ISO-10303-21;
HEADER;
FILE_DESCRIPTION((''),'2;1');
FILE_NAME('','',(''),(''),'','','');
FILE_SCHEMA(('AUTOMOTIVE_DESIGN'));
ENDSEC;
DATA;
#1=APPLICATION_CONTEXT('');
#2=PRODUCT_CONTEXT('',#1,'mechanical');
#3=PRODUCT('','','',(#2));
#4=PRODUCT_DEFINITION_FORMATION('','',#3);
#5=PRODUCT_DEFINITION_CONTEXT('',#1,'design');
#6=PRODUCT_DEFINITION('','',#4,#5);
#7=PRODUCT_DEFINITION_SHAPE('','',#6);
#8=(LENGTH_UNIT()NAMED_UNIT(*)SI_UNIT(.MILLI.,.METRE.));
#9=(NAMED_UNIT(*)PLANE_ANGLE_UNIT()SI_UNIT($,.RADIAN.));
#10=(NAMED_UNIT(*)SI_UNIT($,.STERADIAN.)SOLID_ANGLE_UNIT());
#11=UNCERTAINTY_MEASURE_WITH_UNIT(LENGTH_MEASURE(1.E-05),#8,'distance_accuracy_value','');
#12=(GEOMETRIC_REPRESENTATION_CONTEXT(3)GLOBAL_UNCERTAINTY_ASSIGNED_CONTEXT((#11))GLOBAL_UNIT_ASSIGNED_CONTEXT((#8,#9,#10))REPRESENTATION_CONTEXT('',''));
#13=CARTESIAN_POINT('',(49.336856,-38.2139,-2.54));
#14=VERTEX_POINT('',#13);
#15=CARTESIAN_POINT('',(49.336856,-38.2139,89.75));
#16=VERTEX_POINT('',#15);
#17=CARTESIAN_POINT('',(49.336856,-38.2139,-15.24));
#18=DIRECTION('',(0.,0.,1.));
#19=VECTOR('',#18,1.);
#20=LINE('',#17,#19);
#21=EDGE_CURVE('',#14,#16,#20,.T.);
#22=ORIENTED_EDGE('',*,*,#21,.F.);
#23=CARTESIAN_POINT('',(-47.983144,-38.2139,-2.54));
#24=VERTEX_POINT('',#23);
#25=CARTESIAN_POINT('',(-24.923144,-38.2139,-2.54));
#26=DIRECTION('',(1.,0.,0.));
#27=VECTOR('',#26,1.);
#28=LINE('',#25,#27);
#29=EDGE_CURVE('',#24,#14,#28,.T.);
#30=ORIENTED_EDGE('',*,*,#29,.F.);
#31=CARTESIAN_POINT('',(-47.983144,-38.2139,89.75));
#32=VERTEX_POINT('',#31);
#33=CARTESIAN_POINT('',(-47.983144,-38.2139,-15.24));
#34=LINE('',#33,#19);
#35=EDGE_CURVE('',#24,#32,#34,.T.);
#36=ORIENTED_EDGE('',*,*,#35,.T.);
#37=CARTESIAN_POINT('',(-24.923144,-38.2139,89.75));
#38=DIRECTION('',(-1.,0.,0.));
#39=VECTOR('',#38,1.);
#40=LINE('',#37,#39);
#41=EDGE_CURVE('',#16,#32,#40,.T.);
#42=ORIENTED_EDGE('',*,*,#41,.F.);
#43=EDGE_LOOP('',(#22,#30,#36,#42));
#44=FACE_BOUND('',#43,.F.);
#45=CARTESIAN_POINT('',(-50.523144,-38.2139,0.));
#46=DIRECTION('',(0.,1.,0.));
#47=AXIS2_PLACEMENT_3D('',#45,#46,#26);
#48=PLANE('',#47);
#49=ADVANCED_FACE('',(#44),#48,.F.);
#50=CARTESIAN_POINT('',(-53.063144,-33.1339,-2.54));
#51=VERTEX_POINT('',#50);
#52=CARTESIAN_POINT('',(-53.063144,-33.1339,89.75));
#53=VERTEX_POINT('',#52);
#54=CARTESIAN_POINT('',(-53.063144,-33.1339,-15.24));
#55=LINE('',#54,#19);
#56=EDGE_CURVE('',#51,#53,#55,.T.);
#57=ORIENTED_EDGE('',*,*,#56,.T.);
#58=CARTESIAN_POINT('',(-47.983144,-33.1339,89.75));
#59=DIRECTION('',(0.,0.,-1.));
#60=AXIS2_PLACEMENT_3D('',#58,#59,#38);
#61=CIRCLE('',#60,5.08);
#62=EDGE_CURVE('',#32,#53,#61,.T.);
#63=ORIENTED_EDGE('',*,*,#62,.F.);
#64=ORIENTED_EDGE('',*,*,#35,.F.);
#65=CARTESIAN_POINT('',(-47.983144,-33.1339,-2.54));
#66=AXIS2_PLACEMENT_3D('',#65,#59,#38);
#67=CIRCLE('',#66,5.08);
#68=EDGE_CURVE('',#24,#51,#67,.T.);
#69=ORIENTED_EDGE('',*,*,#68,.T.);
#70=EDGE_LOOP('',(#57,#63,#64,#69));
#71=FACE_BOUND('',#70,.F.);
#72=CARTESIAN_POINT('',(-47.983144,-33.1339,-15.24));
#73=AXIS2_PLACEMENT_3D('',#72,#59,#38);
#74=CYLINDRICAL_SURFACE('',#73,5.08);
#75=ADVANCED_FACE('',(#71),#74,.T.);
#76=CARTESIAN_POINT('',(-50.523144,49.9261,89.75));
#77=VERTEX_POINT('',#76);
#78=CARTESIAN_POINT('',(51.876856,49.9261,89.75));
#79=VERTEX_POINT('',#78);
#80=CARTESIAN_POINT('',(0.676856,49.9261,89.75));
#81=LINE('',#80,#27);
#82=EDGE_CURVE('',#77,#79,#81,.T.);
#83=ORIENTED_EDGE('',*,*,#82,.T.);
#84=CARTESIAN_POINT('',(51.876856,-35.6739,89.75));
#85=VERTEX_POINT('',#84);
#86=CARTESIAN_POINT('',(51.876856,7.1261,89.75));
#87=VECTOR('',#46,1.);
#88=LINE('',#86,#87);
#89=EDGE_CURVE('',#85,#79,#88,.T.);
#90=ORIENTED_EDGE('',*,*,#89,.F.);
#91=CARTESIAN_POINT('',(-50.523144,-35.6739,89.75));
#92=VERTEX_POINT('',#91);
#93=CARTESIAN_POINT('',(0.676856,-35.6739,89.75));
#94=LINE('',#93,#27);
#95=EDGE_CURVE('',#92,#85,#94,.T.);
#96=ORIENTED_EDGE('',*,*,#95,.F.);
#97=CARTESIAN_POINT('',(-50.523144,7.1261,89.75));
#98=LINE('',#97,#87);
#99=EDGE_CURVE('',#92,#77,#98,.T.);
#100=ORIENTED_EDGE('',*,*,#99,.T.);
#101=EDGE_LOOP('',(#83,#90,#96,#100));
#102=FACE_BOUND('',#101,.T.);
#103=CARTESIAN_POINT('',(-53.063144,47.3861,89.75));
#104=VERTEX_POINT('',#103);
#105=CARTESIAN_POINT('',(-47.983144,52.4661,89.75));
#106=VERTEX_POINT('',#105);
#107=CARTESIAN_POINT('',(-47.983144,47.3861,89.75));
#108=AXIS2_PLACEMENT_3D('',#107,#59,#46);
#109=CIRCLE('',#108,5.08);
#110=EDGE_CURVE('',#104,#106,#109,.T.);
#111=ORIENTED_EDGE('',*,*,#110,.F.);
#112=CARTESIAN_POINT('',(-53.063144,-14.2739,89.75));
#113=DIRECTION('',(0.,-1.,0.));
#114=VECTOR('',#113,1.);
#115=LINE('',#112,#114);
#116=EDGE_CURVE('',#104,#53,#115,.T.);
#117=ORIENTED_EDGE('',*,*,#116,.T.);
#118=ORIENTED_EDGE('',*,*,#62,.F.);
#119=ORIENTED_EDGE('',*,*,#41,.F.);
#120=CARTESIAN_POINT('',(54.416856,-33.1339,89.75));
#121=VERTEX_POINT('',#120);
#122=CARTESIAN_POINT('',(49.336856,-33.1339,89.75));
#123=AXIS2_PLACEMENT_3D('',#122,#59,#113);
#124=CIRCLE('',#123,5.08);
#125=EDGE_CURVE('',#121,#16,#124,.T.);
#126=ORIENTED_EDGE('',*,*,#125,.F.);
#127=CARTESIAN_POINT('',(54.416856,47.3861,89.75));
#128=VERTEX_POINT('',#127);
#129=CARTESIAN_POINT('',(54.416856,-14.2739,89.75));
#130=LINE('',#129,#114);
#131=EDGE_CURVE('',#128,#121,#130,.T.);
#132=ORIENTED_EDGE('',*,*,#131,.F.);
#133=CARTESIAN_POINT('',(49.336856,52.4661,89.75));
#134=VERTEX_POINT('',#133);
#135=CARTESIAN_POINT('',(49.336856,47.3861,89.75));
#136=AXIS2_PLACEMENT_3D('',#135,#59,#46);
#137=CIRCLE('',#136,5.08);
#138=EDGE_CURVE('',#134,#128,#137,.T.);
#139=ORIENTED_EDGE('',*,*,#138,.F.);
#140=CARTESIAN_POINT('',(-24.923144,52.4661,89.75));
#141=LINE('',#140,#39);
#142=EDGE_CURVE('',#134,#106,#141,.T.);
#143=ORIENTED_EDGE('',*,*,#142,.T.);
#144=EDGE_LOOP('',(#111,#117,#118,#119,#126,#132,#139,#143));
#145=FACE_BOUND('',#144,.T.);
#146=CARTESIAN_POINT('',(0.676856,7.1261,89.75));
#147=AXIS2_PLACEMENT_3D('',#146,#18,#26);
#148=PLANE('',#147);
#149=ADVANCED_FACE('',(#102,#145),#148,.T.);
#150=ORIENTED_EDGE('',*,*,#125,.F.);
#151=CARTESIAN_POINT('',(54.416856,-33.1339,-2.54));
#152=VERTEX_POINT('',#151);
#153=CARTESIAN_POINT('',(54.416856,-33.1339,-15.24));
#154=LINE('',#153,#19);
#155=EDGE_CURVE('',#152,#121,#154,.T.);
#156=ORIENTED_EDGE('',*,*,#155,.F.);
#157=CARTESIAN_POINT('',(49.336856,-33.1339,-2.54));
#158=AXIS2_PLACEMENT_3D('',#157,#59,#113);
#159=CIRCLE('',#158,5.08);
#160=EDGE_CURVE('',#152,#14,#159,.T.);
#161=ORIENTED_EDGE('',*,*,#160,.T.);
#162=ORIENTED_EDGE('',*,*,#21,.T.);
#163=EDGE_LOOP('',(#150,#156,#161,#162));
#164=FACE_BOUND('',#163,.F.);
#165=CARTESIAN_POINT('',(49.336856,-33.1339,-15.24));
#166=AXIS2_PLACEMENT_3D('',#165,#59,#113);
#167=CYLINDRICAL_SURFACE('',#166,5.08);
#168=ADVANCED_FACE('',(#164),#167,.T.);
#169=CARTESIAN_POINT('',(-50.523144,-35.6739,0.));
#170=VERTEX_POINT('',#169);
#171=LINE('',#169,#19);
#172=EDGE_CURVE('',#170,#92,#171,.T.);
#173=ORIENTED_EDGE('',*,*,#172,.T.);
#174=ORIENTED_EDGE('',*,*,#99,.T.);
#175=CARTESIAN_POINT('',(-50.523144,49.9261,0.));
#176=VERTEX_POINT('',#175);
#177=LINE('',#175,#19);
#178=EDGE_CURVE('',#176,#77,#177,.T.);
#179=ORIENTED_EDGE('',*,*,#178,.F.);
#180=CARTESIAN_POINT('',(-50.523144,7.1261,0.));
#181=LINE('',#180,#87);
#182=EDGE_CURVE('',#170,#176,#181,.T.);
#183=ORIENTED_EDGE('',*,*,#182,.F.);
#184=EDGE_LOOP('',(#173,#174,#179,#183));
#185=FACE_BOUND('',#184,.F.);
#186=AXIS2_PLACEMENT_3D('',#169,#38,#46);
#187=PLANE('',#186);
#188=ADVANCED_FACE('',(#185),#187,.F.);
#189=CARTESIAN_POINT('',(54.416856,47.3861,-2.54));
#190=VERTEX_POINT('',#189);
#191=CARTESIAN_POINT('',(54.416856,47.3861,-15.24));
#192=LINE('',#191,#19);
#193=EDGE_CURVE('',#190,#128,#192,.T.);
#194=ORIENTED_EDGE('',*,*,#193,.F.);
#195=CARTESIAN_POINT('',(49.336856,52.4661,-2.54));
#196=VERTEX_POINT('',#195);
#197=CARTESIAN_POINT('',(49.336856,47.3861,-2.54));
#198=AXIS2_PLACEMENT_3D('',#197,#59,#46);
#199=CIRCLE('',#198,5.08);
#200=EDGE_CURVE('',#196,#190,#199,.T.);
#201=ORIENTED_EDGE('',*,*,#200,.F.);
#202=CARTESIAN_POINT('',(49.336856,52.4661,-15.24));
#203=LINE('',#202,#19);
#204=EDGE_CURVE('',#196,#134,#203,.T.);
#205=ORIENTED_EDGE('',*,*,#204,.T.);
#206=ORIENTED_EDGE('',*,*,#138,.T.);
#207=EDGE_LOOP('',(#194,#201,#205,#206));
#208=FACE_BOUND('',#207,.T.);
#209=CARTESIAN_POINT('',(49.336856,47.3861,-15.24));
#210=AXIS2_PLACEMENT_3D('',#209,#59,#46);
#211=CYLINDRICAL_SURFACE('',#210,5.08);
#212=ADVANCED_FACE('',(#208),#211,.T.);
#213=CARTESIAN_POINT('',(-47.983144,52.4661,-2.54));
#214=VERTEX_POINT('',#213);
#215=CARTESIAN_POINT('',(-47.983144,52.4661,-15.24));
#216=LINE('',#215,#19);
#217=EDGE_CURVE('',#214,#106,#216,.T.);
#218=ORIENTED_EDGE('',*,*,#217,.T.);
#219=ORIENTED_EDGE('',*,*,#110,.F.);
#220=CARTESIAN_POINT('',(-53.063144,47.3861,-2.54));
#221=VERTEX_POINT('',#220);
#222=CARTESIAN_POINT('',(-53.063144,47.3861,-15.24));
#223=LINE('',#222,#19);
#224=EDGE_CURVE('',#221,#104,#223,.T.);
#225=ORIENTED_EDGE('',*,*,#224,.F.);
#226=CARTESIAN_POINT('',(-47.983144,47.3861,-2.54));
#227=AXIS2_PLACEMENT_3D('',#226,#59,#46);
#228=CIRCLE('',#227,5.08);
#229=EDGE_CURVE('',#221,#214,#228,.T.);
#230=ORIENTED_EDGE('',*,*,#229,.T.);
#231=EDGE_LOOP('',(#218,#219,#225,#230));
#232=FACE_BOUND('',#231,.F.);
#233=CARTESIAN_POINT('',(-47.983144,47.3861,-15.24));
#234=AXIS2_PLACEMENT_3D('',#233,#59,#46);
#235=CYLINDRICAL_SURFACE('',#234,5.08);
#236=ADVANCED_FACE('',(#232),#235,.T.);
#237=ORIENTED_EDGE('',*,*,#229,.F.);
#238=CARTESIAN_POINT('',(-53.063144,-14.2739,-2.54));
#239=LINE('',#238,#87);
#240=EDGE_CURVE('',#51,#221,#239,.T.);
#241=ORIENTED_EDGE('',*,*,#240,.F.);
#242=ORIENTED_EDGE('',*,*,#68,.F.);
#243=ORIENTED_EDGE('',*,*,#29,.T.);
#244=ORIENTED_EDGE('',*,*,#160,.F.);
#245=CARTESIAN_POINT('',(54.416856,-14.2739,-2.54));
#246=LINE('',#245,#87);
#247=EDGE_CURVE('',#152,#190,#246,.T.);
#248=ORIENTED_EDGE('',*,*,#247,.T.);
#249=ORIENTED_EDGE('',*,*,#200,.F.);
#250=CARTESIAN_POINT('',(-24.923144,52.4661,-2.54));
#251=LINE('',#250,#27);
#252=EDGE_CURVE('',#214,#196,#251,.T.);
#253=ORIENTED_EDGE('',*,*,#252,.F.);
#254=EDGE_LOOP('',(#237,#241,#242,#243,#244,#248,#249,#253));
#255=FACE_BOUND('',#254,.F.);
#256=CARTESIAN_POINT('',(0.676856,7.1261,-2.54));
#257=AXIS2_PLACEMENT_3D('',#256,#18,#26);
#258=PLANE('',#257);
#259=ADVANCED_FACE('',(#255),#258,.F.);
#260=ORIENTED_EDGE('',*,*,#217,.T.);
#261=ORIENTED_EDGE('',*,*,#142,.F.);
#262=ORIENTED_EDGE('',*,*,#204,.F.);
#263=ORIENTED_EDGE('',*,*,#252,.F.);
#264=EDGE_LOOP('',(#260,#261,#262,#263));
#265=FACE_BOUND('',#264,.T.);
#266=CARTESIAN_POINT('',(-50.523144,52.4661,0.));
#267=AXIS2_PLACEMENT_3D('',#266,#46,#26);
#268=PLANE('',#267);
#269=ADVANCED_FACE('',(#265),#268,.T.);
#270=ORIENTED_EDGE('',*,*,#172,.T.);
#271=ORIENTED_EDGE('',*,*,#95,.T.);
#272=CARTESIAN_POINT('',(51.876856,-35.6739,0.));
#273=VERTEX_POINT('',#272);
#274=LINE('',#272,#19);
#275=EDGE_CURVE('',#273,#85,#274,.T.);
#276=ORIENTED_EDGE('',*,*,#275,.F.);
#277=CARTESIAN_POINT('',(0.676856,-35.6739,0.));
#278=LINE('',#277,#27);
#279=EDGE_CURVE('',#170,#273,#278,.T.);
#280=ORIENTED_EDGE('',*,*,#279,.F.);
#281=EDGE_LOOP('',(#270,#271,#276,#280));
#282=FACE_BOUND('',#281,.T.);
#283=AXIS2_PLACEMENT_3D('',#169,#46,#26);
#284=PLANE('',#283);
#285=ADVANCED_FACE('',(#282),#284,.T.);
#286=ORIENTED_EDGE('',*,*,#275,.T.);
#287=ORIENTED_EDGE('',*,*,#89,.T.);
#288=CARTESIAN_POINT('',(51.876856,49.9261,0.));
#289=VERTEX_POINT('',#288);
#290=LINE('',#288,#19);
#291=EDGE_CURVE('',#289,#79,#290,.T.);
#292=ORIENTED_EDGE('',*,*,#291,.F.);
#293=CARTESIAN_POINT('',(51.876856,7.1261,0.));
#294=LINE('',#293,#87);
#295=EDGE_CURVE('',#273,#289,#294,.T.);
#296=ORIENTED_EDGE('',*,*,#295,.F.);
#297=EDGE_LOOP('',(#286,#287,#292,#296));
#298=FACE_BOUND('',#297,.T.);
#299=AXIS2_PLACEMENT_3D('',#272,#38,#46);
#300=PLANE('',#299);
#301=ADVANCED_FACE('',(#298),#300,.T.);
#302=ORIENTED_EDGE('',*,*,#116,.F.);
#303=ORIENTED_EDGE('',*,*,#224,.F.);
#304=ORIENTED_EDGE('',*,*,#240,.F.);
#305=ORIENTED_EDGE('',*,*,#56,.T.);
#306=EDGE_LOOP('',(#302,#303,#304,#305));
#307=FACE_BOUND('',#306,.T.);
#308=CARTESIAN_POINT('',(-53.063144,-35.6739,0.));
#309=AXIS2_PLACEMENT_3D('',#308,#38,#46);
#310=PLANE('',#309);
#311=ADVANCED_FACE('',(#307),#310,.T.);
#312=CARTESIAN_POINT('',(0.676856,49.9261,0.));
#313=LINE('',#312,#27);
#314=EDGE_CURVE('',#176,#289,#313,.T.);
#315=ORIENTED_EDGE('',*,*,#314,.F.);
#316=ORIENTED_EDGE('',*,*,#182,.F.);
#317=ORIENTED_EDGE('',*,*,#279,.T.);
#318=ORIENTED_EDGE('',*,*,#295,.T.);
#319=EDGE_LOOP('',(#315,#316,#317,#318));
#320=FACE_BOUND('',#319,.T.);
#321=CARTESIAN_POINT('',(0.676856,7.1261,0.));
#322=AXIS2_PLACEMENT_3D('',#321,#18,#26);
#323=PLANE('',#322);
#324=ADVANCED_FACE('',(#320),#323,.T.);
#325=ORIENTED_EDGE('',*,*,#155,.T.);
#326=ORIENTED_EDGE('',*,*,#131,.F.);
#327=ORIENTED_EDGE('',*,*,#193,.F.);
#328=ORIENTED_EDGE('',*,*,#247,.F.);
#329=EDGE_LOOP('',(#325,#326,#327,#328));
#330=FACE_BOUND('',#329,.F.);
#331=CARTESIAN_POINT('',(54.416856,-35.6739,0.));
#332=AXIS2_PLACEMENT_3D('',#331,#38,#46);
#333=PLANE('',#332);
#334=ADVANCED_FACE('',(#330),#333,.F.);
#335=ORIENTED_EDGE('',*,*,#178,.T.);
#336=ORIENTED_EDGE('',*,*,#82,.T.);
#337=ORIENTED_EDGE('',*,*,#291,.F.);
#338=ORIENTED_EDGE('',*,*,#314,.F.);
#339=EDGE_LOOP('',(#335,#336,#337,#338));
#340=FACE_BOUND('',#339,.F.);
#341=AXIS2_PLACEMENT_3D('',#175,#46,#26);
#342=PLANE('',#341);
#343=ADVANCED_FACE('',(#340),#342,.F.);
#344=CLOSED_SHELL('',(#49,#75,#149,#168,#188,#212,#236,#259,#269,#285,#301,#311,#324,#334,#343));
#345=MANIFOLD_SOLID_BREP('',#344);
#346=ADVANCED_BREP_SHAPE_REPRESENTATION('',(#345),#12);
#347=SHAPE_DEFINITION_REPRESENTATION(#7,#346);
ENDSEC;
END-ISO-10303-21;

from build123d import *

# Parameters (mm, degrees)
F0_W        = 102.4
F0_H        = 85.6
F1_DEPTH    = 89.75
F2_T        = 2.54
F3_T1_DEPTH = 117.69


# Not quite as in the source:
# - a fillet or chamfer that OpenCascade refuses, or shapes differently, is made with other operations: its cross-section is extruded or revolved along the edge and cut away or added


with BuildPart() as f1:
    # F0 (on Top) → F1 (new body)
    with BuildSketch(Plane.XY):
        with Locations((0.6768562123, 7.1260996301)):
            Rectangle(F0_W, F0_H)
    extrude(amount=F1_DEPTH)

    # F2
    f2_openings = [f1.faces().sort_by_distance(p)[0] for p in [
        (0.676856, 7.1261, 89.75),
    ]]
    offset(amount=F2_T, openings=f2_openings, kind=Kind.INTERSECTION)

    # F3: fillet of radius 5.08 on 4 edges, made by hand

    # F3_s2 → F3_t1 (cut)
    with BuildSketch(Plane.XY.offset(-15.24)):
        with BuildLine():
            ThreePointArc((49.3368562123, 52.4660996301), (52.9289586607, 50.9782020785), (54.4168562123, 47.3860996301))
            Line((54.4168562123, 47.3860996301), (54.4168562123, 52.4660996301))
            Line((54.4168562123, 52.4660996301), (49.3368562123, 52.4660996301))
        make_face()
        with BuildLine():
            ThreePointArc((-47.9831437877, 52.4660996301), (-51.5752462361, 50.9782020785), (-53.0631437877, 47.3860996301))
            Line((-53.0631437877, 47.3860996301), (-53.0631437877, 52.4660996301))
            Line((-53.0631437877, 52.4660996301), (-47.9831437877, 52.4660996301))
        make_face()
        with BuildLine():
            ThreePointArc((-53.0631437877, -33.1339003699), (-51.5752462361, -36.7260028183), (-47.9831437877, -38.2139003699))
            Line((-47.9831437877, -38.2139003699), (-53.0631437877, -38.2139003699))
            Line((-53.0631437877, -38.2139003699), (-53.0631437877, -33.1339003699))
        make_face()
        with BuildLine():
            ThreePointArc((49.3368562123, -38.2139003699), (52.9289586607, -36.7260028183), (54.4168562123, -33.1339003699))
            Line((54.4168562123, -33.1339003699), (54.4168562123, -38.2139003699))
            Line((54.4168562123, -38.2139003699), (49.3368562123, -38.2139003699))
        make_face()
    extrude(amount=F3_T1_DEPTH, mode=Mode.SUBTRACT)


solid = f1.part
